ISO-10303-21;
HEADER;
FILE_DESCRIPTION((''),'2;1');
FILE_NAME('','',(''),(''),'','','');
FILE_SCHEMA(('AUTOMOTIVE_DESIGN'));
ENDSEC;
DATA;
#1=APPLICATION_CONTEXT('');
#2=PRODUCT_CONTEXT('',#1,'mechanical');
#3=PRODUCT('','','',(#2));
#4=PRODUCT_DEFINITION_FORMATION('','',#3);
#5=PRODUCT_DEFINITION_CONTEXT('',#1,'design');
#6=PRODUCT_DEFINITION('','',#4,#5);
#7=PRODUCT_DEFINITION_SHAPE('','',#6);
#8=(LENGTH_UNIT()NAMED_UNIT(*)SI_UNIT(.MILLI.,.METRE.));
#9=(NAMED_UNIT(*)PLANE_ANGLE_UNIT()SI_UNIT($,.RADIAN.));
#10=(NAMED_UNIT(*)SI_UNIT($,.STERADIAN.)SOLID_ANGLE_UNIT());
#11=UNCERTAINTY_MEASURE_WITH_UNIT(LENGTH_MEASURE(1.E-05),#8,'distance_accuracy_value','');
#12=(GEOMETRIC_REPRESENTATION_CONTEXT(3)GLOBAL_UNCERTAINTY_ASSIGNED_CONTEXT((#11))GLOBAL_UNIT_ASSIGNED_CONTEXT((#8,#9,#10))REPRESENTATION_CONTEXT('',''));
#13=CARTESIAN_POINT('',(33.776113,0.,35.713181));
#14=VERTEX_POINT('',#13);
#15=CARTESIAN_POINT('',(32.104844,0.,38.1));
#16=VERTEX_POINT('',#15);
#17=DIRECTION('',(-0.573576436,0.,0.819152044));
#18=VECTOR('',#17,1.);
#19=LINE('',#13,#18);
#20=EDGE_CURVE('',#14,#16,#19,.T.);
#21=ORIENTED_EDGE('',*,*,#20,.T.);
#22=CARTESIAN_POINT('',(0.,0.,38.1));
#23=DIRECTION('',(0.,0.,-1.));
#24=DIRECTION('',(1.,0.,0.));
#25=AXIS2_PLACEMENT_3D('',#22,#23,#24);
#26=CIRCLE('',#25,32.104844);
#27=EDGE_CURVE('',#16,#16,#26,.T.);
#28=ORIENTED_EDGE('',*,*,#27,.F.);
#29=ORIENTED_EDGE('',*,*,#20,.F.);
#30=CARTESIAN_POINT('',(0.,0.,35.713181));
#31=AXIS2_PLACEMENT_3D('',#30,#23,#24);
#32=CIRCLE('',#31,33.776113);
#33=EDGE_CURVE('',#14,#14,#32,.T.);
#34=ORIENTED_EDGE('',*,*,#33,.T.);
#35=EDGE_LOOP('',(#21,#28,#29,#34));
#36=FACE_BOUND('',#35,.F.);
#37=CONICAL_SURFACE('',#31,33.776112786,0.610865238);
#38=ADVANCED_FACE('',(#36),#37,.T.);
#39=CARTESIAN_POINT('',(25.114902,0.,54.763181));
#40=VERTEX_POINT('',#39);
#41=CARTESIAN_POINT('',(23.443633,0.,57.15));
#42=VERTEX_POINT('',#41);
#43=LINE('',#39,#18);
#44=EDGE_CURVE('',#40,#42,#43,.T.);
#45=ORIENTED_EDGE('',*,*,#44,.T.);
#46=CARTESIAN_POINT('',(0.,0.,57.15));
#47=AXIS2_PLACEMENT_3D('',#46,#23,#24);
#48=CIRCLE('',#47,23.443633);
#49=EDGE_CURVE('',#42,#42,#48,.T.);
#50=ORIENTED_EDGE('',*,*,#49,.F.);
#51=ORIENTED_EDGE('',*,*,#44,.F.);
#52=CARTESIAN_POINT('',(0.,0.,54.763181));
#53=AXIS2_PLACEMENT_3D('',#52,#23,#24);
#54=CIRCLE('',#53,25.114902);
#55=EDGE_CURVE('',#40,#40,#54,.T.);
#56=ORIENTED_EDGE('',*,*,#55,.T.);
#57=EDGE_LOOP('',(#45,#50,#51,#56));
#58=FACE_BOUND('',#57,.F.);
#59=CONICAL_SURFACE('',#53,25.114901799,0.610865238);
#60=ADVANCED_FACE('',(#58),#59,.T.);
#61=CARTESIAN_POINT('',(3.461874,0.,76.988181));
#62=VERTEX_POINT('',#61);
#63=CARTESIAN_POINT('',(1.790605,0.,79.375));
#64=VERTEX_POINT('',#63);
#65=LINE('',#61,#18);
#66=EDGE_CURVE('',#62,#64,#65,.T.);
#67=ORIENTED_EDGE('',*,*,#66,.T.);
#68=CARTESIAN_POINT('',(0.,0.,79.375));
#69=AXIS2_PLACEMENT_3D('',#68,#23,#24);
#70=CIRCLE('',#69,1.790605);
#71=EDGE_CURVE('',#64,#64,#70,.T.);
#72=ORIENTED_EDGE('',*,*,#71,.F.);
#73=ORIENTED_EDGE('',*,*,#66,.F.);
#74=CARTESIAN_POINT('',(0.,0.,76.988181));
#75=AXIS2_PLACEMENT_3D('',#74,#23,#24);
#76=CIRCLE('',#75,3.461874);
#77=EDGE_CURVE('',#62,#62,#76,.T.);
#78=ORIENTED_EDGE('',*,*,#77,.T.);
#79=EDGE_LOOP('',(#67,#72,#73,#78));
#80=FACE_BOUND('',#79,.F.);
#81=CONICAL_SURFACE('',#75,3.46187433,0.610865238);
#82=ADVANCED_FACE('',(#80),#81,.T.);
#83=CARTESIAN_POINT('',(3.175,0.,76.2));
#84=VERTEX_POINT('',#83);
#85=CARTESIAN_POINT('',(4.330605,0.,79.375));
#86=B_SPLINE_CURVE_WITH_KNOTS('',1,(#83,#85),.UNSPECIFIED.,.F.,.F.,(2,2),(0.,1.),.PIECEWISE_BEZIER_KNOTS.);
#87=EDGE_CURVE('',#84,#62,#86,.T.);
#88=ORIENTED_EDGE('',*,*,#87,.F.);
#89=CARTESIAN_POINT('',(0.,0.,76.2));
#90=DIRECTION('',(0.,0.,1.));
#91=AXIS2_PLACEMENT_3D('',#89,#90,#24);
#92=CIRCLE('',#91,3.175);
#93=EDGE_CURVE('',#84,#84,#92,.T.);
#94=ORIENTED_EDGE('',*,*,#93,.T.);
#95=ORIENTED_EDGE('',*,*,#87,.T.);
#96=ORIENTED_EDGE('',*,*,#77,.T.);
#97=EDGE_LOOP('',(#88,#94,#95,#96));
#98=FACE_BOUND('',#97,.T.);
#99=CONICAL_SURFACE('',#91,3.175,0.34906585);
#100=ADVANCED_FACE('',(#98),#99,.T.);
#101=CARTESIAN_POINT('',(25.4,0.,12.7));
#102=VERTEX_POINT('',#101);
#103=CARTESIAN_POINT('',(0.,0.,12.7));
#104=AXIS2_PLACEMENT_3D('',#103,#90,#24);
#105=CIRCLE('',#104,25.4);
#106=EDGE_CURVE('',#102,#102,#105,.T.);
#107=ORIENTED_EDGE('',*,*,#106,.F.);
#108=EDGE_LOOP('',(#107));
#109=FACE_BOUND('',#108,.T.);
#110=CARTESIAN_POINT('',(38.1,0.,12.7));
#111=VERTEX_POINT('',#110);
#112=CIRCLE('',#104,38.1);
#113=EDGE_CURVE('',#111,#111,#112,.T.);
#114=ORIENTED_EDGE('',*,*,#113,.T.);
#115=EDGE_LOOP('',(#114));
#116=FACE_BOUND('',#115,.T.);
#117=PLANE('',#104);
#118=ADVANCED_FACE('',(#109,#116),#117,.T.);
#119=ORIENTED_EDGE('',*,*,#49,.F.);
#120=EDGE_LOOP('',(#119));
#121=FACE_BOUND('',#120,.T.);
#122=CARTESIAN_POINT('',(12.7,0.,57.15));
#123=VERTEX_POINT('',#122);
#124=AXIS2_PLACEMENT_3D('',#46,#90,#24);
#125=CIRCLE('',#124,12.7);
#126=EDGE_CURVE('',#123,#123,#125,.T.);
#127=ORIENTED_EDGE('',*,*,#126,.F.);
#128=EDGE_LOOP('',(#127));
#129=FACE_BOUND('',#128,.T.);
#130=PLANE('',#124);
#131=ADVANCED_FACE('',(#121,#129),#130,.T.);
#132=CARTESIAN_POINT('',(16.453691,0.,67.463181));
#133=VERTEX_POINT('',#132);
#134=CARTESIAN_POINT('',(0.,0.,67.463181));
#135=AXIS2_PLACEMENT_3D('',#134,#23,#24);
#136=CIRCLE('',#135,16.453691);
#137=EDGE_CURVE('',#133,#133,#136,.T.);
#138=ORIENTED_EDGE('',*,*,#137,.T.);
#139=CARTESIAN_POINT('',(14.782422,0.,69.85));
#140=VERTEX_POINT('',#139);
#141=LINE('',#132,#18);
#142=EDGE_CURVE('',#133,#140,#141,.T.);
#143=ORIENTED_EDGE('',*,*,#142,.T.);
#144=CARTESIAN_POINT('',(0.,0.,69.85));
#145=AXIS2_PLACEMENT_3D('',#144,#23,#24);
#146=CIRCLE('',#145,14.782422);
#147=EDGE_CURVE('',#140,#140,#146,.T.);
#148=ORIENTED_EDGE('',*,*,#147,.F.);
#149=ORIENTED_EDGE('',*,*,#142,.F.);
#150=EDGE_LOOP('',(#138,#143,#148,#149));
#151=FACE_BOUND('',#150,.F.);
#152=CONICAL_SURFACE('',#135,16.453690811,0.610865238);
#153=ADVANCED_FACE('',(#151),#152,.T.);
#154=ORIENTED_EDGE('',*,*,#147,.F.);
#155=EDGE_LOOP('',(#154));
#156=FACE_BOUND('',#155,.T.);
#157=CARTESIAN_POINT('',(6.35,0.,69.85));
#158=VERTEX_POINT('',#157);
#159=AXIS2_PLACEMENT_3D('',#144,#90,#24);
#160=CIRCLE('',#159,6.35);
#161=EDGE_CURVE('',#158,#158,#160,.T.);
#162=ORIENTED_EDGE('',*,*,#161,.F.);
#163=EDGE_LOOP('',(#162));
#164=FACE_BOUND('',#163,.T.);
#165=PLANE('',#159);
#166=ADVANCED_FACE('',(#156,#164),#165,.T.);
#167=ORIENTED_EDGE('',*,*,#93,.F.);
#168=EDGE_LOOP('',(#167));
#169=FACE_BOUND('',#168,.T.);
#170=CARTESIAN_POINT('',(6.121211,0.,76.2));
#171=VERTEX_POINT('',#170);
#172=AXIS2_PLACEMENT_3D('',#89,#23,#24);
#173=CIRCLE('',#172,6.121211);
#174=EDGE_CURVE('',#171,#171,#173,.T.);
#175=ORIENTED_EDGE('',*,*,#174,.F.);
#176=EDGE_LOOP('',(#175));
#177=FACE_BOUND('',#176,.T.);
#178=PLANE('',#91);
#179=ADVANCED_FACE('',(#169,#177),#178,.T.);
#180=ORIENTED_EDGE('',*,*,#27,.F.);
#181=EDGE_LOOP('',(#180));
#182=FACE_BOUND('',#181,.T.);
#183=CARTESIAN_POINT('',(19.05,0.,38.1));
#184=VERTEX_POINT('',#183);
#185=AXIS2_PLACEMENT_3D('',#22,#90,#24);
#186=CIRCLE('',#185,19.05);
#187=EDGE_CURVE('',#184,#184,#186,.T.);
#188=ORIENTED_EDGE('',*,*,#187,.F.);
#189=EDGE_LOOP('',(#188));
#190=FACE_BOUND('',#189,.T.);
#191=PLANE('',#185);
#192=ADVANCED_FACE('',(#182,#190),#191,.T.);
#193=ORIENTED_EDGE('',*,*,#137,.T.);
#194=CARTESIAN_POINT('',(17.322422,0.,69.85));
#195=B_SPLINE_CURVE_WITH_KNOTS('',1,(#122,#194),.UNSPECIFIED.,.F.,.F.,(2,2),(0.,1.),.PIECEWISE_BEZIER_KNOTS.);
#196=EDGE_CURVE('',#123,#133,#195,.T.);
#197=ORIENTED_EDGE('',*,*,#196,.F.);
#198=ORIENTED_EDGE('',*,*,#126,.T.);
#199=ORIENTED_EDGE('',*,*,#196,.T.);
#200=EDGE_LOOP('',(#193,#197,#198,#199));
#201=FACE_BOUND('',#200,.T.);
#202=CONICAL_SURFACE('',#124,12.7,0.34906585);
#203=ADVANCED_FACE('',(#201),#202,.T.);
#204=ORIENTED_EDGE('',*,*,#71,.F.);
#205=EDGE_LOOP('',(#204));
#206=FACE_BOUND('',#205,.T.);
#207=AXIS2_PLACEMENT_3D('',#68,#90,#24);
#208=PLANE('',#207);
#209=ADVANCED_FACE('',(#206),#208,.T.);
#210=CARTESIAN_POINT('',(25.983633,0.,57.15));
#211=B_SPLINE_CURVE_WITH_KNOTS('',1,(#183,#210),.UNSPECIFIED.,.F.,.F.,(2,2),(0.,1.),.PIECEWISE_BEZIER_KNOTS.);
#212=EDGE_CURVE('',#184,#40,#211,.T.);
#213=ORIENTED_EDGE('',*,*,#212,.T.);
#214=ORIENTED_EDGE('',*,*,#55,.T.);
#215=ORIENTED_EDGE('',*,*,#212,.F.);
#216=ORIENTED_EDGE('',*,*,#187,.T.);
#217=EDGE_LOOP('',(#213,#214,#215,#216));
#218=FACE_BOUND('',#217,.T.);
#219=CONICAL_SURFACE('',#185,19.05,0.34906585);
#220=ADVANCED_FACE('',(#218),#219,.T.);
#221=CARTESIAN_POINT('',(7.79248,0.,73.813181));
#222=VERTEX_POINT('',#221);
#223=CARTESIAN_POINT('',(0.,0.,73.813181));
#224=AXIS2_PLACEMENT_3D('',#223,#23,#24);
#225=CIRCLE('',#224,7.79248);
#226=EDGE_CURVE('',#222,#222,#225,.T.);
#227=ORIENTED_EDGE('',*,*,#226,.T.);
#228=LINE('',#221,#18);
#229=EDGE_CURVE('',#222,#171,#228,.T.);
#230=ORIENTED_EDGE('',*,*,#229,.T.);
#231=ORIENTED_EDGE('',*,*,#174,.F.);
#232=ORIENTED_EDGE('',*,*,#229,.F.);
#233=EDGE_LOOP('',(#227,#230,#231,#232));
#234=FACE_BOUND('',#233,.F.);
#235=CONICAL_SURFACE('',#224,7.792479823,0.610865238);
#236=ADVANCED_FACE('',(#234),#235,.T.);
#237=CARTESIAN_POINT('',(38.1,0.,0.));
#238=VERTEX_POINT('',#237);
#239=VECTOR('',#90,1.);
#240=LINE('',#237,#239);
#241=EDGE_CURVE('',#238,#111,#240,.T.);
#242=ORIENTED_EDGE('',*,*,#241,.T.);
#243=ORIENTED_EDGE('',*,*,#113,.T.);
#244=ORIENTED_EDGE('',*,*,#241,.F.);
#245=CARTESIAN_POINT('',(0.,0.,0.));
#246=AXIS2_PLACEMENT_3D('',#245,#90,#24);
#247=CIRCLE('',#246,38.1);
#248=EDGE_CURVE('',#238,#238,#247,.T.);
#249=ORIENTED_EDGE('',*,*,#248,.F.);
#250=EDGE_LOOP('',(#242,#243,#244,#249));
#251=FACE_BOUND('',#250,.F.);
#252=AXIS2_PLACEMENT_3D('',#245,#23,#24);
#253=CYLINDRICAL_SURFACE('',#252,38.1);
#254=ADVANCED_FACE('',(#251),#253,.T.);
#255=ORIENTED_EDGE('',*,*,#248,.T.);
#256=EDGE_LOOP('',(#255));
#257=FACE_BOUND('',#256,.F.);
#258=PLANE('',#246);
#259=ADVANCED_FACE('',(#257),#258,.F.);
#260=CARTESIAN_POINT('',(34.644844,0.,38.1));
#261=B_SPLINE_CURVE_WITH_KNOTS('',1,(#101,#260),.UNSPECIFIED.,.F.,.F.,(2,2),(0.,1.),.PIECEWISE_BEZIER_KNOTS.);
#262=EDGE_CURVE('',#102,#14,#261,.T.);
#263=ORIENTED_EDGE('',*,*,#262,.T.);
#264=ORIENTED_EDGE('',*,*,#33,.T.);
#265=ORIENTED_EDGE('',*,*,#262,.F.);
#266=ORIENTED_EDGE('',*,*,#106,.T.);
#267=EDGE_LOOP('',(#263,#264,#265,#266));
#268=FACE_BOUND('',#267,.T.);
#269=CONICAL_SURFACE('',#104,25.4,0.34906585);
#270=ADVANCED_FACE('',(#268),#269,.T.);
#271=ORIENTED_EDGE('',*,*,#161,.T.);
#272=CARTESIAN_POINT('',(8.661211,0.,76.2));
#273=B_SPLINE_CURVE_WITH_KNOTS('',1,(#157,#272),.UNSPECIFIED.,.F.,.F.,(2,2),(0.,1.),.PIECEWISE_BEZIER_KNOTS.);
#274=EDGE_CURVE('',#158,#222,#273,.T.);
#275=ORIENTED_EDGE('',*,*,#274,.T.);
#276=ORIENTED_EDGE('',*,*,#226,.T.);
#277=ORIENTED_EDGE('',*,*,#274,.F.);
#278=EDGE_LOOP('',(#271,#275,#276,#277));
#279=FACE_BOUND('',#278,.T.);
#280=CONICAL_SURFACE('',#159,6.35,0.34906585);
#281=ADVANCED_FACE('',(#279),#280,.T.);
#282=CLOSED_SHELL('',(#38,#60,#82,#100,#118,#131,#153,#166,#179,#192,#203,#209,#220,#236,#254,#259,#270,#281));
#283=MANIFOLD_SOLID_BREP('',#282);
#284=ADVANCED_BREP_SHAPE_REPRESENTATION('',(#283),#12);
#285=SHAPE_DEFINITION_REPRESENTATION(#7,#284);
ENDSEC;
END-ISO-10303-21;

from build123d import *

# Parameters (mm, degrees)
F0_R      = 38.1
F1_DEPTH  = 12.7
F2_R      = 25.4
F3_DEPTH  = 25.4
F3_TAPER  = -20
F4_R      = 19.05
F5_DEPTH  = 19.05
F5_TAPER  = -20
F6_R      = 12.7
F7_DEPTH  = 12.7
F7_TAPER  = -20
F8_R      = 6.35
F9_DEPTH  = 6.35
F9_TAPER  = -20
F10_R     = 3.175
F11_DEPTH = 3.175
F11_TAPER = -20


# Not quite as in the source:
# - a fillet or chamfer that OpenCascade refuses, or shapes differently, is made with other operations: its cross-section is extruded or revolved along the edge and cut away or added


with BuildPart() as f1:
    # F0 (on Top) → F1 (new body)
    with BuildSketch(Plane.XY):
        Circle(F0_R)
    extrude(amount=F1_DEPTH)

    # F2 (on face) → F3 (join)
    with BuildSketch(Plane.XY.offset(12.7)):
        Circle(F2_R)
    extrude(amount=F3_DEPTH, taper=F3_TAPER)

    # F4 (on face) → F5 (join)
    with BuildSketch(Plane.XY.offset(38.1)):
        Circle(F4_R)
    extrude(amount=F5_DEPTH, taper=F5_TAPER)

    # F6 (on face) → F7 (join)
    with BuildSketch(Plane.XY.offset(57.15)):
        Circle(F6_R)
    extrude(amount=F7_DEPTH, taper=F7_TAPER)

    # F8 (on face) → F9 (join)
    with BuildSketch(Plane.XY.offset(69.85)):
        Circle(F8_R)
    extrude(amount=F9_DEPTH, taper=F9_TAPER)

    # F10 (on face) → F11 (join)
    with BuildSketch(Plane.XY.offset(76.2)):
        Circle(F10_R)
    extrude(amount=F11_DEPTH, taper=F11_TAPER)

    # F12: chamfer of 2.54 on 5 edges, made by hand

    # F12_s1 → F12_t2 (revolve, cut)
    with BuildSketch(Plane.XZ):
        Polygon((33.7761127863, 35.7131807432), (32.1048439504, 38.1), (34.6448439504, 38.1), align=None)
    revolve(axis=Axis((0, 0, 38.1), (0, 0, -1)), mode=Mode.SUBTRACT)

    # F12_s3 → F12_t4 (revolve, cut)
    with BuildSketch(Plane.XZ):
        Polygon((25.1149017987, 54.7631807432), (23.4436329628, 57.15), (25.9836329628, 57.15), align=None)
    revolve(axis=Axis((0, 0, 57.15), (0, 0, -1)), mode=Mode.SUBTRACT)

    # F12_s5 → F12_t6 (revolve, cut)
    with BuildSketch(Plane.XZ):
        Polygon((16.4536908111, 67.4631807432), (14.7824219752, 69.85), (17.3224219752, 69.85), align=None)
    revolve(axis=Axis((0, 0, 69.85), (0, 0, -1)), mode=Mode.SUBTRACT)

    # F12_s7 → F12_t8 (revolve, cut)
    with BuildSketch(Plane.XZ):
        Polygon((7.7924798235, 73.8131807432), (6.1212109876, 76.2), (8.6612109876, 76.2), align=None)
    revolve(axis=Axis((0, 0, 76.2), (0, 0, -1)), mode=Mode.SUBTRACT)

    # F12_s9 → F12_t10 (revolve, cut)
    with BuildSketch(Plane.XZ):
        Polygon((3.4618743297, 76.9881807432), (1.7906054938, 79.375), (4.3306054938, 79.375), align=None)
    revolve(axis=Axis((0, 0, 79.375), (0, 0, -1)), mode=Mode.SUBTRACT)


solid = f1.part
